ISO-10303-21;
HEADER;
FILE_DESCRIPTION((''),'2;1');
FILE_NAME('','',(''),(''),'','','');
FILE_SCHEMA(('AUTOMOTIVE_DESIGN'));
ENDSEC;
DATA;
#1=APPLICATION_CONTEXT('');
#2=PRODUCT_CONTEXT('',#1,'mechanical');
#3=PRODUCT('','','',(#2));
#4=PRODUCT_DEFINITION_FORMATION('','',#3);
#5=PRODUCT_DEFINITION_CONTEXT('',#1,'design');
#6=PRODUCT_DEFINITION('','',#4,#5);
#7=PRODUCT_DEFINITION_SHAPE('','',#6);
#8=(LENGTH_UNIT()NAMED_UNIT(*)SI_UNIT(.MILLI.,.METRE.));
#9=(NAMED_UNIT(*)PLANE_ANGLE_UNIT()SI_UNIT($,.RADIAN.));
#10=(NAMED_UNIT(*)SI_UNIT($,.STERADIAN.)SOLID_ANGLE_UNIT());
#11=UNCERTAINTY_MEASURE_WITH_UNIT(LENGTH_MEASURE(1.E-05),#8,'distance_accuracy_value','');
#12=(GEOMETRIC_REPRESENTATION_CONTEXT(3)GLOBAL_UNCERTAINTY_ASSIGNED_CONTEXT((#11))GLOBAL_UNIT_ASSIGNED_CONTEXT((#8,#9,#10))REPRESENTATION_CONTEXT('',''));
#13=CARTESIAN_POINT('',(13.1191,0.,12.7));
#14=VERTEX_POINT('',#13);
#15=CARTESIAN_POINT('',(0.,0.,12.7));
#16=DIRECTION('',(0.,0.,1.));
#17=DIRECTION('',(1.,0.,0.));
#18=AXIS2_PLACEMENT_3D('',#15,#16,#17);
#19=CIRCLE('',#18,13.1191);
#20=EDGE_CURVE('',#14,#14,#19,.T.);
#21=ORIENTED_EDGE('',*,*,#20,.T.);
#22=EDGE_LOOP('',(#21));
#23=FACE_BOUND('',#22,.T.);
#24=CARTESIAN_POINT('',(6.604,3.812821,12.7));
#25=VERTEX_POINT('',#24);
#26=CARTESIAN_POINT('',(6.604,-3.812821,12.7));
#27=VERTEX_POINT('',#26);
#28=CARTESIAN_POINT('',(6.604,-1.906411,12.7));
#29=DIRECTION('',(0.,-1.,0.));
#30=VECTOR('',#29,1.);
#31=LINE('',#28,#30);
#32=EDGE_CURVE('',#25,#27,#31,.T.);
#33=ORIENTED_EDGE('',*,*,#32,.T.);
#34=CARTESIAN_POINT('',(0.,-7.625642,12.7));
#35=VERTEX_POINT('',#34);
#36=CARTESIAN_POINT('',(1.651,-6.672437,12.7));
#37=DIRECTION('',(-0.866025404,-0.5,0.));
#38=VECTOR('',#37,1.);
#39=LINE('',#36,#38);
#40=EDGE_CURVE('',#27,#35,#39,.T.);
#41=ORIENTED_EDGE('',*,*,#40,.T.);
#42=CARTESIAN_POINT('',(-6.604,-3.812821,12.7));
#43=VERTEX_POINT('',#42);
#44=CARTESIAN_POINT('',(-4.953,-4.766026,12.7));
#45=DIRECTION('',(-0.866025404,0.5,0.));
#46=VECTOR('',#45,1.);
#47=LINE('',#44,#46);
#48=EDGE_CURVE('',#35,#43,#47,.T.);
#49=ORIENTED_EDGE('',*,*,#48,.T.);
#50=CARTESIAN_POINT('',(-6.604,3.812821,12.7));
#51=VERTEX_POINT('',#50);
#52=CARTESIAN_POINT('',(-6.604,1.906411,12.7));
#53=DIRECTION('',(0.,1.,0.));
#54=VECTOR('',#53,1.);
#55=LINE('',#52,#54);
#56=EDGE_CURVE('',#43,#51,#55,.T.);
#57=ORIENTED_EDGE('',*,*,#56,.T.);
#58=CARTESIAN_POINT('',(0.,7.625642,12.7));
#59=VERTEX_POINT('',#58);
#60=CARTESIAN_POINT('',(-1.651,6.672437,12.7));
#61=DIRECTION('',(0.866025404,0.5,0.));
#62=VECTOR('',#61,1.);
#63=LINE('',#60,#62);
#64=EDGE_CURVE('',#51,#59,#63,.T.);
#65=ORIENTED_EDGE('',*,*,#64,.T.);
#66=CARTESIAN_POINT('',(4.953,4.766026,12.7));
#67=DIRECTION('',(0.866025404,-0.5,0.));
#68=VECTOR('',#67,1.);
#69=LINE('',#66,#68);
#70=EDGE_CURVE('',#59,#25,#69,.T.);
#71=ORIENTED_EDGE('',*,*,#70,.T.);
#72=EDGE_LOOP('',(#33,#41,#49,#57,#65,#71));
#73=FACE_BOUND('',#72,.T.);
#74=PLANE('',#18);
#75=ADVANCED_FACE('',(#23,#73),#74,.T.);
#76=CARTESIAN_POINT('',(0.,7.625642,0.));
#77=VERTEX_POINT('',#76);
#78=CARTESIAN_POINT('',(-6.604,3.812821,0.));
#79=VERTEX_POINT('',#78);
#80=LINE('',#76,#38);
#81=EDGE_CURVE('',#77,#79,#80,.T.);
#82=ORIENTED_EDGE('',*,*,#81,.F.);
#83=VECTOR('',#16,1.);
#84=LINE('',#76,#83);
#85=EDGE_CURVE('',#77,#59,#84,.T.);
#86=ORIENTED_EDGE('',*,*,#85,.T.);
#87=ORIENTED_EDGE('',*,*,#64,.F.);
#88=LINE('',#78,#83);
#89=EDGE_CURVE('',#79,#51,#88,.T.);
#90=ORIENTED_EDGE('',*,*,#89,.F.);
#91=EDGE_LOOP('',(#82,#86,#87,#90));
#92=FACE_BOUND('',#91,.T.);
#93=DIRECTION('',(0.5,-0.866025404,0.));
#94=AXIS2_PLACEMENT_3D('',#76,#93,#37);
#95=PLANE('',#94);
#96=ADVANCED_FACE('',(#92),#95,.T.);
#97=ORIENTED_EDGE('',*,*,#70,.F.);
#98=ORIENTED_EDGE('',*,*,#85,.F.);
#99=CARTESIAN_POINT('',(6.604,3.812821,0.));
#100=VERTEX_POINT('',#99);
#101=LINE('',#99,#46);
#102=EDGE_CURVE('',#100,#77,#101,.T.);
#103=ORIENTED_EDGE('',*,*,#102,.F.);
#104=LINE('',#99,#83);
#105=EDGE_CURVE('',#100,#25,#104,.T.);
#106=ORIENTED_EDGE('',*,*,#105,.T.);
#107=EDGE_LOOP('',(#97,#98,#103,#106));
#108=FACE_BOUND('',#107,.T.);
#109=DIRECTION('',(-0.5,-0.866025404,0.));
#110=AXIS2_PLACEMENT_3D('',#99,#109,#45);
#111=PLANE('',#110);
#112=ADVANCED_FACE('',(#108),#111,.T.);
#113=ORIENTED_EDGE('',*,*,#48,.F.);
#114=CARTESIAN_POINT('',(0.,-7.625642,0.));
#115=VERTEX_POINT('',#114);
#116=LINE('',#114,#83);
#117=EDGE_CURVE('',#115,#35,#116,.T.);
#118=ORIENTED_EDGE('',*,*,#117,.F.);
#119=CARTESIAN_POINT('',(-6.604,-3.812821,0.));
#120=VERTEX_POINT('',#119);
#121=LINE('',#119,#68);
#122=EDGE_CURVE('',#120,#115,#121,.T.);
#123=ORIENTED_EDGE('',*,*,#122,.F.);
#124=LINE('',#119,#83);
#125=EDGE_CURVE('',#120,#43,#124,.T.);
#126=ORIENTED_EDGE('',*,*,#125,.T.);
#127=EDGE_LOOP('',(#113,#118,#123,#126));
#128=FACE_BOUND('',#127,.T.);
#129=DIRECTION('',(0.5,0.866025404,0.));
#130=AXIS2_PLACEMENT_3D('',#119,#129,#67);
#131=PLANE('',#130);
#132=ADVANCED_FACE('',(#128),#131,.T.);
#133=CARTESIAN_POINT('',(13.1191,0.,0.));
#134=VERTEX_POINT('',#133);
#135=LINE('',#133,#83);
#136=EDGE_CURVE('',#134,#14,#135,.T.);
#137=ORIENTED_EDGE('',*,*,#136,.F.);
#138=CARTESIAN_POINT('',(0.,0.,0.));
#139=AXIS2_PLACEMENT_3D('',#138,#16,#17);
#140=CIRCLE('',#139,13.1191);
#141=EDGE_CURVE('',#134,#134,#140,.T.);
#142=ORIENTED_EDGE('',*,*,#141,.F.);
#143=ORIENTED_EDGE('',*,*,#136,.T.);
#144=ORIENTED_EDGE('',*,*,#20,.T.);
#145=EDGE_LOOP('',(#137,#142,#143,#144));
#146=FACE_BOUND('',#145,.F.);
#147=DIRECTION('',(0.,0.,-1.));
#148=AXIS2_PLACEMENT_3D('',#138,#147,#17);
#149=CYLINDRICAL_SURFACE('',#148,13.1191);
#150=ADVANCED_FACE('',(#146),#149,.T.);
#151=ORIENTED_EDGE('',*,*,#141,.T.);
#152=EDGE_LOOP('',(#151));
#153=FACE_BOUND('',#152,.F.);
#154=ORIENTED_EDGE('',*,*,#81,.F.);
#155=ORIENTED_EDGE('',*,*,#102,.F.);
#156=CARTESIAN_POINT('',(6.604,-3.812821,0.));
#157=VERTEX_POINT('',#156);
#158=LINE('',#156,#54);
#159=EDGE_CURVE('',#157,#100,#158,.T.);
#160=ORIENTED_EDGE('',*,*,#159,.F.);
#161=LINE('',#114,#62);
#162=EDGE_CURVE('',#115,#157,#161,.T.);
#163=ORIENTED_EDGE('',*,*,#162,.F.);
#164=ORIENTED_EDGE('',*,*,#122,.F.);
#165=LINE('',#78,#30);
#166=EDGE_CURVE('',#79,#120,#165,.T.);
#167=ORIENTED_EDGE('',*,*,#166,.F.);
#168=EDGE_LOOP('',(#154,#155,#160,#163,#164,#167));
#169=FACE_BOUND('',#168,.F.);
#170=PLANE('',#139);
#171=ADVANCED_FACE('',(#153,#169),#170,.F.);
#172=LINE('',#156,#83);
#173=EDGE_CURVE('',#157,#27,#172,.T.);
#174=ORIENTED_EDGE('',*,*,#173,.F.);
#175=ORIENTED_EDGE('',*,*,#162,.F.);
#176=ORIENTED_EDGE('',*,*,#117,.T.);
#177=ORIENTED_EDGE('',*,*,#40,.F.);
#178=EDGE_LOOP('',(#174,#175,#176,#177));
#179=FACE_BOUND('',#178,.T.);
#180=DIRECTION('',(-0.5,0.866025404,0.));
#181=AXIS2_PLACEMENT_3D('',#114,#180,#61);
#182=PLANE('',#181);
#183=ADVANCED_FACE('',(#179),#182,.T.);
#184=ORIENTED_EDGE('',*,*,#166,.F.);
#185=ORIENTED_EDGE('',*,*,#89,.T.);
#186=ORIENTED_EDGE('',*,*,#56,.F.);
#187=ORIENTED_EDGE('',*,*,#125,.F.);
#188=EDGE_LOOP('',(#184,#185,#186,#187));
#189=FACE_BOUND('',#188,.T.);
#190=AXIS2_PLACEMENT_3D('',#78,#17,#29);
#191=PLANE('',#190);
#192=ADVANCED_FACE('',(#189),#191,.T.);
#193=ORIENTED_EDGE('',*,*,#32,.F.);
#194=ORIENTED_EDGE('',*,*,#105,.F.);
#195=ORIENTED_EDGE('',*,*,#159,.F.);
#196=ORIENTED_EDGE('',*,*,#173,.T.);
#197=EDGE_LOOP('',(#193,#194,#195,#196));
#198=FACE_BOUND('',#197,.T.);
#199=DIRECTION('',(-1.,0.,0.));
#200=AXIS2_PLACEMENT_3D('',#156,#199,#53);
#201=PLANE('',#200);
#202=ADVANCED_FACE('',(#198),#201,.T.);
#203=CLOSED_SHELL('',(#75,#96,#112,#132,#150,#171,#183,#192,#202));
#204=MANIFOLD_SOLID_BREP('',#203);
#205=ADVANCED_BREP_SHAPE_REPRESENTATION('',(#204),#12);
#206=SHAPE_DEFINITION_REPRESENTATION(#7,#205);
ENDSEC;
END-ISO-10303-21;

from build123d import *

# Parameters (mm, degrees)
F0_R     = 13.1191
F1_DEPTH = 12.7
F3_DEPTH = 36.322


# Not quite as in the source:
# - a length typed as a fraction of an inch, garbled in the dataset ("3 / 203.2 mm" for 3/8 in), is restored


with BuildPart() as f1:
    # F0 (on Top) → F1 (new body)
    with BuildSketch(Plane.XY):
        Circle(F0_R)
    extrude(amount=F1_DEPTH)

    # F2 (on Top) → F3 (cut)
    with BuildSketch(Plane.XY):
        Polygon((6.604, -3.8128211777), (6.604, 3.8128211777), (0, 7.6256423555), (-6.604, 3.8128211777), (-6.604, -3.8128211777), (0, -7.6256423555), align=None)
    extrude(amount=F3_DEPTH, mode=Mode.SUBTRACT)


solid = f1.part
